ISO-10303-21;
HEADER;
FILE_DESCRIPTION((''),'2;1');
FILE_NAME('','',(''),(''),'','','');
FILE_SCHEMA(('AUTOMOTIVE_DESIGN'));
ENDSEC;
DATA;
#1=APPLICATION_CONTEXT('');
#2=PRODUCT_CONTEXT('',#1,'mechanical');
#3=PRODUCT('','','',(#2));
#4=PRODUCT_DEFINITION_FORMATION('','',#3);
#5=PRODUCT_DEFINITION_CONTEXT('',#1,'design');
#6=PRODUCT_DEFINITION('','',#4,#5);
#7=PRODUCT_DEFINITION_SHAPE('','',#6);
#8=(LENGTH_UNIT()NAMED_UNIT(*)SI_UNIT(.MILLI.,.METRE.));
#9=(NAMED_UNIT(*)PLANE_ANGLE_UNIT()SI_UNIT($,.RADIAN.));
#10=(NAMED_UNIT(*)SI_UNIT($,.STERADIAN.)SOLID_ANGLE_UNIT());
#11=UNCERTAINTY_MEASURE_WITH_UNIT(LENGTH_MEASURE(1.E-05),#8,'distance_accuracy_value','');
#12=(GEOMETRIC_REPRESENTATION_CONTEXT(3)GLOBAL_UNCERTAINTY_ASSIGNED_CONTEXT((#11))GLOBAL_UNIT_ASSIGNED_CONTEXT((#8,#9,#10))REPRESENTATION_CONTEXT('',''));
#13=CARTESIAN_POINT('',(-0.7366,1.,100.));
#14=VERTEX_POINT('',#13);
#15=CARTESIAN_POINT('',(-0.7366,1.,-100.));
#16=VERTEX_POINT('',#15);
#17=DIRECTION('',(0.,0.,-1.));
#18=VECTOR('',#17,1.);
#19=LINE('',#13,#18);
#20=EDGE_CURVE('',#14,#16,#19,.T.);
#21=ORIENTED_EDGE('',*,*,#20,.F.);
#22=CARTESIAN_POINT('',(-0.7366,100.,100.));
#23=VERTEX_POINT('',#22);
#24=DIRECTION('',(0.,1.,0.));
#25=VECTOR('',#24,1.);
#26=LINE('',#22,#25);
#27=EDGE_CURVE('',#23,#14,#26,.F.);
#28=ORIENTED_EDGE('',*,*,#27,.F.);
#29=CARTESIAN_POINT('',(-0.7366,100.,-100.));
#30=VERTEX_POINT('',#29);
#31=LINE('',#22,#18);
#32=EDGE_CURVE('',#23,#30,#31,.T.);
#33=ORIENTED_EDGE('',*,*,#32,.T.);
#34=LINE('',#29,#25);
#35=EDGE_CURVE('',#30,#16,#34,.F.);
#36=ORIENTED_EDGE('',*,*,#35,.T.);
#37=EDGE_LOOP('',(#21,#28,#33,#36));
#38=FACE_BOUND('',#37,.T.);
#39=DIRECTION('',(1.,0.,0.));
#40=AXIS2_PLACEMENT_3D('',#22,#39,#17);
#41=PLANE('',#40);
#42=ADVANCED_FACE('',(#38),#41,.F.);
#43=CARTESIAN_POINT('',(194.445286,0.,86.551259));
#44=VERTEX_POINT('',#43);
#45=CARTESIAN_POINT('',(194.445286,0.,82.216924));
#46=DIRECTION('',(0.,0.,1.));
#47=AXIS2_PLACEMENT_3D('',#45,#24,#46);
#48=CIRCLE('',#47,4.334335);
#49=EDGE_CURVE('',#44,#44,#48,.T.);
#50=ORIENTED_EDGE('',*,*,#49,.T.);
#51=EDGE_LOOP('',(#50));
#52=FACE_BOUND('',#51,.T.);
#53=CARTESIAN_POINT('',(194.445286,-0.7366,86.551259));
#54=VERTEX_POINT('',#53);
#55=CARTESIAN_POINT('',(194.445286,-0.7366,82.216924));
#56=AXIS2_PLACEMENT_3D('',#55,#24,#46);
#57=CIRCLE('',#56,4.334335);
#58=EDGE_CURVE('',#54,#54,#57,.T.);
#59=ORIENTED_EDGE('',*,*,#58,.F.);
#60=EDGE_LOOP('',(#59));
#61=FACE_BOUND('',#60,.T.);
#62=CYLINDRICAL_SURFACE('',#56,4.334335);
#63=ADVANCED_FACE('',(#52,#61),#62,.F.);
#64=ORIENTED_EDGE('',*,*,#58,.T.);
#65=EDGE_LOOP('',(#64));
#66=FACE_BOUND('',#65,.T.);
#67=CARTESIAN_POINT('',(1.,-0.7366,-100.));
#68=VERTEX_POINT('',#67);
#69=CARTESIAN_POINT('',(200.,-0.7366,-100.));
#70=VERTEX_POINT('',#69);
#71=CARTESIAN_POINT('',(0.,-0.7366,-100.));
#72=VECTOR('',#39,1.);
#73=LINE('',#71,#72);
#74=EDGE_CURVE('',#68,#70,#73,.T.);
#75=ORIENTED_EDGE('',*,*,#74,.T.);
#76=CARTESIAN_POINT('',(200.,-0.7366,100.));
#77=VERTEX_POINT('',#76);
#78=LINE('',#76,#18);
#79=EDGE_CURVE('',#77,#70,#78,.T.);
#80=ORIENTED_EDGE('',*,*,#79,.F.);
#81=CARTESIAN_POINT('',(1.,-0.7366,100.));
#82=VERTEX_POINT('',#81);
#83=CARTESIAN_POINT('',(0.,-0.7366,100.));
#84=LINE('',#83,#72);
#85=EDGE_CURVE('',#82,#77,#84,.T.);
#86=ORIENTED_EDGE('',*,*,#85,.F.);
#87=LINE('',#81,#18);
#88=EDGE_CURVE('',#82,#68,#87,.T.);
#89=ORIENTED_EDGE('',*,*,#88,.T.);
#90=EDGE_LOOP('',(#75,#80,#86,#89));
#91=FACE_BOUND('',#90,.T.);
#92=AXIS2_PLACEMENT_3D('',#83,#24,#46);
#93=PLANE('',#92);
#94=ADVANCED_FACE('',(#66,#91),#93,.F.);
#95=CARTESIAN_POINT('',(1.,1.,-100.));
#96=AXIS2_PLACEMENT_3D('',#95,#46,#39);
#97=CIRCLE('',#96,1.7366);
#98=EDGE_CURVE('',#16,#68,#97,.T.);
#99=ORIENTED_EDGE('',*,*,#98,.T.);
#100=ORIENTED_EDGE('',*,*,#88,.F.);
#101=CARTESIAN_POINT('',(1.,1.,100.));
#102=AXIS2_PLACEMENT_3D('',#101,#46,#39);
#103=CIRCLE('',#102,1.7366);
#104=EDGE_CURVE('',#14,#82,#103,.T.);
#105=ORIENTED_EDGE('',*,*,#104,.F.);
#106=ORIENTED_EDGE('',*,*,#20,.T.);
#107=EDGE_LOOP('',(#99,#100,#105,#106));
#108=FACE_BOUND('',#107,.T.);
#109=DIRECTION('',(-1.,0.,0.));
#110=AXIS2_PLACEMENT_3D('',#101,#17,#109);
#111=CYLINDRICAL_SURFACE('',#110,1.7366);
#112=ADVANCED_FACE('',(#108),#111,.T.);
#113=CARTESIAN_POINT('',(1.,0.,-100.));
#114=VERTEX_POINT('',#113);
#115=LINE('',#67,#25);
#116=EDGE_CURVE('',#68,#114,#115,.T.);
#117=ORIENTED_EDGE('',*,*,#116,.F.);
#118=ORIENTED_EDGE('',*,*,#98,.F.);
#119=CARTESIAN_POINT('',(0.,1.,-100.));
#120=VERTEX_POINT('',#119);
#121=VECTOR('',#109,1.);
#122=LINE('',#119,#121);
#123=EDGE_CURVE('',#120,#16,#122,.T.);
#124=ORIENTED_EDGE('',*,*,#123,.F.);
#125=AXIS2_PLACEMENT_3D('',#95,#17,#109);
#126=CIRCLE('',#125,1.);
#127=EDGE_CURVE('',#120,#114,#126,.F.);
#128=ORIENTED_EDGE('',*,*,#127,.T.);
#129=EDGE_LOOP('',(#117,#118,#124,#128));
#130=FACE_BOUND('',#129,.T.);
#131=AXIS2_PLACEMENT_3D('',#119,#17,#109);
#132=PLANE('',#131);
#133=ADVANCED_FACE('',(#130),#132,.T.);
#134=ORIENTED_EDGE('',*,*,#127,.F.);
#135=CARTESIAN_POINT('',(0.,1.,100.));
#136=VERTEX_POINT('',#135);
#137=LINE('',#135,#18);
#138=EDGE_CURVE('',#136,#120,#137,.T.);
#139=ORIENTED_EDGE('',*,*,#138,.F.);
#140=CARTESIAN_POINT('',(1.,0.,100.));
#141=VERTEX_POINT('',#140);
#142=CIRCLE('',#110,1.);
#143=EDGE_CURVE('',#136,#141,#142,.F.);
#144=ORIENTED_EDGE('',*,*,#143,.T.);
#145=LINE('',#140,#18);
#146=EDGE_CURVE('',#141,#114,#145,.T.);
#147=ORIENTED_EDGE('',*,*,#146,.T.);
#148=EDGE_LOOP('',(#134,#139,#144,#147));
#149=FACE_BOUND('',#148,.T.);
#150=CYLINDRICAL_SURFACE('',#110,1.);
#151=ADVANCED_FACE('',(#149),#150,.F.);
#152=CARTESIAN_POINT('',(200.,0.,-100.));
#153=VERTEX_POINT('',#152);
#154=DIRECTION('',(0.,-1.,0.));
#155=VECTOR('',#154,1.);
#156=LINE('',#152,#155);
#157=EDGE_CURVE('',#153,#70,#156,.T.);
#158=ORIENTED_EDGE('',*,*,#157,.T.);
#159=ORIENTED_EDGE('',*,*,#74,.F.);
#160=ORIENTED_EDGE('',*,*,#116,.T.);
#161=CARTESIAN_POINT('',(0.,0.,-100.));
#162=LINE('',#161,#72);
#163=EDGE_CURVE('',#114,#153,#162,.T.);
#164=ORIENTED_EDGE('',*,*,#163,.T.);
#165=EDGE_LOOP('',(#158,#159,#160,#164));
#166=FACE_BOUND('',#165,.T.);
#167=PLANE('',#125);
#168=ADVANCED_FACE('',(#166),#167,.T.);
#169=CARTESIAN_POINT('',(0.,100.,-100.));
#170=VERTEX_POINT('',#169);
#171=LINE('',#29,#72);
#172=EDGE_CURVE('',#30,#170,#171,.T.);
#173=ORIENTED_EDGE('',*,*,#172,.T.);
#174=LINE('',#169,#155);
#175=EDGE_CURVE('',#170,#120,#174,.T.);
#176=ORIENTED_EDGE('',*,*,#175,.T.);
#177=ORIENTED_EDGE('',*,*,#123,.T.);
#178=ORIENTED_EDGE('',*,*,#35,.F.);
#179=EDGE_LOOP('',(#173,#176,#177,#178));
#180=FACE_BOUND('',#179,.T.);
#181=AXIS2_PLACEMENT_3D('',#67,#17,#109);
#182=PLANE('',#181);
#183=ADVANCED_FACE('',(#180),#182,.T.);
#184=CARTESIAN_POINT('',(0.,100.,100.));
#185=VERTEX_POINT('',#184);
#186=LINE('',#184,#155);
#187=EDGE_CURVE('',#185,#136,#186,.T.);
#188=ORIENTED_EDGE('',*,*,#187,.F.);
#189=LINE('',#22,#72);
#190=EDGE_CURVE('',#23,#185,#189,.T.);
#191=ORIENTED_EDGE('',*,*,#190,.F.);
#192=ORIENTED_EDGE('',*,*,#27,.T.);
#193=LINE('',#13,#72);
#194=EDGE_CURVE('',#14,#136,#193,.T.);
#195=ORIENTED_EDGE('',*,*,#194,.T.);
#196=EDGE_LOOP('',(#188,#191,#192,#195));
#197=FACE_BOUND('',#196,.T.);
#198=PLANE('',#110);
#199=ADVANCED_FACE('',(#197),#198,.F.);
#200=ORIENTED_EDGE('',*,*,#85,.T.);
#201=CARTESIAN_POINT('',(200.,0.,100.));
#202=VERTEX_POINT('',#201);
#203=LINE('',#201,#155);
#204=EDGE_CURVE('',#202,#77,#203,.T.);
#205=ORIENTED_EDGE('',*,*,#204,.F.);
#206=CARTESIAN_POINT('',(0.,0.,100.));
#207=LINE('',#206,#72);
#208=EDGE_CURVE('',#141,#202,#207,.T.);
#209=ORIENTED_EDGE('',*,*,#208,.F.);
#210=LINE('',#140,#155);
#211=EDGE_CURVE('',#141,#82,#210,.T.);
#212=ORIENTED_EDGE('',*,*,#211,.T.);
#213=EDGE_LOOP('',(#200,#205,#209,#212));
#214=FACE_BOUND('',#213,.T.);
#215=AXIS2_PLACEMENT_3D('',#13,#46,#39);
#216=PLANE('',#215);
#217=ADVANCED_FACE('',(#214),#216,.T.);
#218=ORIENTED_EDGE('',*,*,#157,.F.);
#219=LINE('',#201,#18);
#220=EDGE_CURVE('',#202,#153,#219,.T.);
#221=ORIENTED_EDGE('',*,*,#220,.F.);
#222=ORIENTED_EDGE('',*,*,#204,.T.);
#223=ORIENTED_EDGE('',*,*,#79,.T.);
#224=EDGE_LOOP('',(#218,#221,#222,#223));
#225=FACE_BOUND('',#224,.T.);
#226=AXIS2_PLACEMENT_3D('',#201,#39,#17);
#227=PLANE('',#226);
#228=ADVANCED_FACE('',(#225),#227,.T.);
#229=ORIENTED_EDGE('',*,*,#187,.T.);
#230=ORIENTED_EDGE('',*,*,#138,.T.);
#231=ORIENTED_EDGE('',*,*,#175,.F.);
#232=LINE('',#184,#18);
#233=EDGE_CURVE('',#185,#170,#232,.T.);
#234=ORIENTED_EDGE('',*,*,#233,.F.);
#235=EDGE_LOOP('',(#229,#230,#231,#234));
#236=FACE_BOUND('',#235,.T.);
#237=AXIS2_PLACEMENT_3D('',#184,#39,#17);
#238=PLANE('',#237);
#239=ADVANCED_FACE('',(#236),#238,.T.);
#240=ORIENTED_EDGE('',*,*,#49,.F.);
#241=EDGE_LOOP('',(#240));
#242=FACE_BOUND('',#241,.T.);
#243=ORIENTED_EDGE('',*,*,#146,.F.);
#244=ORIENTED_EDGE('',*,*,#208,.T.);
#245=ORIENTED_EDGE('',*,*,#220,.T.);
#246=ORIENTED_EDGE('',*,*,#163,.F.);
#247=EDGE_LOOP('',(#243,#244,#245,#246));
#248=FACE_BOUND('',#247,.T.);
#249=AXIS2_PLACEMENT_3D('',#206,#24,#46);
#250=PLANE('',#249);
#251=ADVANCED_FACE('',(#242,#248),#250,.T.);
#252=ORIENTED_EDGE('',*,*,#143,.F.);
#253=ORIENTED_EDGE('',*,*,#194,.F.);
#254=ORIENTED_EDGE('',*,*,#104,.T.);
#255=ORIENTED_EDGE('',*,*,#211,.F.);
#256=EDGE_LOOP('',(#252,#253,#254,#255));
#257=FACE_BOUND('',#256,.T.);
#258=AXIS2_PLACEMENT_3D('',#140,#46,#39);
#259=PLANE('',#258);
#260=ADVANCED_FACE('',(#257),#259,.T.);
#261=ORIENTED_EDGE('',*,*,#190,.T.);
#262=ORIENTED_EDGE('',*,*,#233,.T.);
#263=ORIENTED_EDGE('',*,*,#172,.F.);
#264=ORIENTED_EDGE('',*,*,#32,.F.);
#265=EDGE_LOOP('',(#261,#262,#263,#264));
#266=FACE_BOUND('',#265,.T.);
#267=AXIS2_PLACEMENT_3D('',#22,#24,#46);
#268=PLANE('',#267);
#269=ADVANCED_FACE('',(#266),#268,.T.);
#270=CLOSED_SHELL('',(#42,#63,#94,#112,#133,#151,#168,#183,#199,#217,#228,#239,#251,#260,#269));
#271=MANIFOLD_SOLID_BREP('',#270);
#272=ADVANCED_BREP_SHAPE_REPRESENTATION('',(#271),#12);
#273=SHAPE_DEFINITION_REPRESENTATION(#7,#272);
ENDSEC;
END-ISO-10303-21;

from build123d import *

# Parameters (mm, degrees)
BASE_FLANGE1_DEPTH = 100
SKETCH6_R          = 4.334335372
CUT_EXTRUDE1_DEPTH = 10


# Sheet-metal steps are written as plain solids
with BuildPart() as part:
    # Sketch1 → Base-Flange1 (new, symmetric)
    with BuildSketch(Plane.XY):
        with BuildLine():
            Line((0, 100), (0, 1))
            ThreePointArc((0, 1), (0.292893219, 0.292893219), (1, 0))
            Line((1, 0), (200, 0))
            Line((200, 0), (200, -0.7366))
            Line((200, -0.7366), (1, -0.7366))
            ThreePointArc((1, -0.7366), (-0.227961636, -0.227961636), (-0.7366, 1))
            Line((-0.7366, 1), (-0.7366, 100))
            Line((-0.7366, 100), (0, 100))
        make_face()
    extrude(amount=BASE_FLANGE1_DEPTH, both=True)

    # Sketch6 → Cut-Extrude1 (cut)
    with BuildSketch(Plane(origin=(0, 0, 0), x_dir=(1, 0, 0), z_dir=(0, 1, 0))):
        with Locations(Location((194.445286262, -82.216924087, 0), (0, 0, 270))):
            Circle(SKETCH6_R)
    extrude(amount=-CUT_EXTRUDE1_DEPTH, mode=Mode.SUBTRACT)


solid = part.part
